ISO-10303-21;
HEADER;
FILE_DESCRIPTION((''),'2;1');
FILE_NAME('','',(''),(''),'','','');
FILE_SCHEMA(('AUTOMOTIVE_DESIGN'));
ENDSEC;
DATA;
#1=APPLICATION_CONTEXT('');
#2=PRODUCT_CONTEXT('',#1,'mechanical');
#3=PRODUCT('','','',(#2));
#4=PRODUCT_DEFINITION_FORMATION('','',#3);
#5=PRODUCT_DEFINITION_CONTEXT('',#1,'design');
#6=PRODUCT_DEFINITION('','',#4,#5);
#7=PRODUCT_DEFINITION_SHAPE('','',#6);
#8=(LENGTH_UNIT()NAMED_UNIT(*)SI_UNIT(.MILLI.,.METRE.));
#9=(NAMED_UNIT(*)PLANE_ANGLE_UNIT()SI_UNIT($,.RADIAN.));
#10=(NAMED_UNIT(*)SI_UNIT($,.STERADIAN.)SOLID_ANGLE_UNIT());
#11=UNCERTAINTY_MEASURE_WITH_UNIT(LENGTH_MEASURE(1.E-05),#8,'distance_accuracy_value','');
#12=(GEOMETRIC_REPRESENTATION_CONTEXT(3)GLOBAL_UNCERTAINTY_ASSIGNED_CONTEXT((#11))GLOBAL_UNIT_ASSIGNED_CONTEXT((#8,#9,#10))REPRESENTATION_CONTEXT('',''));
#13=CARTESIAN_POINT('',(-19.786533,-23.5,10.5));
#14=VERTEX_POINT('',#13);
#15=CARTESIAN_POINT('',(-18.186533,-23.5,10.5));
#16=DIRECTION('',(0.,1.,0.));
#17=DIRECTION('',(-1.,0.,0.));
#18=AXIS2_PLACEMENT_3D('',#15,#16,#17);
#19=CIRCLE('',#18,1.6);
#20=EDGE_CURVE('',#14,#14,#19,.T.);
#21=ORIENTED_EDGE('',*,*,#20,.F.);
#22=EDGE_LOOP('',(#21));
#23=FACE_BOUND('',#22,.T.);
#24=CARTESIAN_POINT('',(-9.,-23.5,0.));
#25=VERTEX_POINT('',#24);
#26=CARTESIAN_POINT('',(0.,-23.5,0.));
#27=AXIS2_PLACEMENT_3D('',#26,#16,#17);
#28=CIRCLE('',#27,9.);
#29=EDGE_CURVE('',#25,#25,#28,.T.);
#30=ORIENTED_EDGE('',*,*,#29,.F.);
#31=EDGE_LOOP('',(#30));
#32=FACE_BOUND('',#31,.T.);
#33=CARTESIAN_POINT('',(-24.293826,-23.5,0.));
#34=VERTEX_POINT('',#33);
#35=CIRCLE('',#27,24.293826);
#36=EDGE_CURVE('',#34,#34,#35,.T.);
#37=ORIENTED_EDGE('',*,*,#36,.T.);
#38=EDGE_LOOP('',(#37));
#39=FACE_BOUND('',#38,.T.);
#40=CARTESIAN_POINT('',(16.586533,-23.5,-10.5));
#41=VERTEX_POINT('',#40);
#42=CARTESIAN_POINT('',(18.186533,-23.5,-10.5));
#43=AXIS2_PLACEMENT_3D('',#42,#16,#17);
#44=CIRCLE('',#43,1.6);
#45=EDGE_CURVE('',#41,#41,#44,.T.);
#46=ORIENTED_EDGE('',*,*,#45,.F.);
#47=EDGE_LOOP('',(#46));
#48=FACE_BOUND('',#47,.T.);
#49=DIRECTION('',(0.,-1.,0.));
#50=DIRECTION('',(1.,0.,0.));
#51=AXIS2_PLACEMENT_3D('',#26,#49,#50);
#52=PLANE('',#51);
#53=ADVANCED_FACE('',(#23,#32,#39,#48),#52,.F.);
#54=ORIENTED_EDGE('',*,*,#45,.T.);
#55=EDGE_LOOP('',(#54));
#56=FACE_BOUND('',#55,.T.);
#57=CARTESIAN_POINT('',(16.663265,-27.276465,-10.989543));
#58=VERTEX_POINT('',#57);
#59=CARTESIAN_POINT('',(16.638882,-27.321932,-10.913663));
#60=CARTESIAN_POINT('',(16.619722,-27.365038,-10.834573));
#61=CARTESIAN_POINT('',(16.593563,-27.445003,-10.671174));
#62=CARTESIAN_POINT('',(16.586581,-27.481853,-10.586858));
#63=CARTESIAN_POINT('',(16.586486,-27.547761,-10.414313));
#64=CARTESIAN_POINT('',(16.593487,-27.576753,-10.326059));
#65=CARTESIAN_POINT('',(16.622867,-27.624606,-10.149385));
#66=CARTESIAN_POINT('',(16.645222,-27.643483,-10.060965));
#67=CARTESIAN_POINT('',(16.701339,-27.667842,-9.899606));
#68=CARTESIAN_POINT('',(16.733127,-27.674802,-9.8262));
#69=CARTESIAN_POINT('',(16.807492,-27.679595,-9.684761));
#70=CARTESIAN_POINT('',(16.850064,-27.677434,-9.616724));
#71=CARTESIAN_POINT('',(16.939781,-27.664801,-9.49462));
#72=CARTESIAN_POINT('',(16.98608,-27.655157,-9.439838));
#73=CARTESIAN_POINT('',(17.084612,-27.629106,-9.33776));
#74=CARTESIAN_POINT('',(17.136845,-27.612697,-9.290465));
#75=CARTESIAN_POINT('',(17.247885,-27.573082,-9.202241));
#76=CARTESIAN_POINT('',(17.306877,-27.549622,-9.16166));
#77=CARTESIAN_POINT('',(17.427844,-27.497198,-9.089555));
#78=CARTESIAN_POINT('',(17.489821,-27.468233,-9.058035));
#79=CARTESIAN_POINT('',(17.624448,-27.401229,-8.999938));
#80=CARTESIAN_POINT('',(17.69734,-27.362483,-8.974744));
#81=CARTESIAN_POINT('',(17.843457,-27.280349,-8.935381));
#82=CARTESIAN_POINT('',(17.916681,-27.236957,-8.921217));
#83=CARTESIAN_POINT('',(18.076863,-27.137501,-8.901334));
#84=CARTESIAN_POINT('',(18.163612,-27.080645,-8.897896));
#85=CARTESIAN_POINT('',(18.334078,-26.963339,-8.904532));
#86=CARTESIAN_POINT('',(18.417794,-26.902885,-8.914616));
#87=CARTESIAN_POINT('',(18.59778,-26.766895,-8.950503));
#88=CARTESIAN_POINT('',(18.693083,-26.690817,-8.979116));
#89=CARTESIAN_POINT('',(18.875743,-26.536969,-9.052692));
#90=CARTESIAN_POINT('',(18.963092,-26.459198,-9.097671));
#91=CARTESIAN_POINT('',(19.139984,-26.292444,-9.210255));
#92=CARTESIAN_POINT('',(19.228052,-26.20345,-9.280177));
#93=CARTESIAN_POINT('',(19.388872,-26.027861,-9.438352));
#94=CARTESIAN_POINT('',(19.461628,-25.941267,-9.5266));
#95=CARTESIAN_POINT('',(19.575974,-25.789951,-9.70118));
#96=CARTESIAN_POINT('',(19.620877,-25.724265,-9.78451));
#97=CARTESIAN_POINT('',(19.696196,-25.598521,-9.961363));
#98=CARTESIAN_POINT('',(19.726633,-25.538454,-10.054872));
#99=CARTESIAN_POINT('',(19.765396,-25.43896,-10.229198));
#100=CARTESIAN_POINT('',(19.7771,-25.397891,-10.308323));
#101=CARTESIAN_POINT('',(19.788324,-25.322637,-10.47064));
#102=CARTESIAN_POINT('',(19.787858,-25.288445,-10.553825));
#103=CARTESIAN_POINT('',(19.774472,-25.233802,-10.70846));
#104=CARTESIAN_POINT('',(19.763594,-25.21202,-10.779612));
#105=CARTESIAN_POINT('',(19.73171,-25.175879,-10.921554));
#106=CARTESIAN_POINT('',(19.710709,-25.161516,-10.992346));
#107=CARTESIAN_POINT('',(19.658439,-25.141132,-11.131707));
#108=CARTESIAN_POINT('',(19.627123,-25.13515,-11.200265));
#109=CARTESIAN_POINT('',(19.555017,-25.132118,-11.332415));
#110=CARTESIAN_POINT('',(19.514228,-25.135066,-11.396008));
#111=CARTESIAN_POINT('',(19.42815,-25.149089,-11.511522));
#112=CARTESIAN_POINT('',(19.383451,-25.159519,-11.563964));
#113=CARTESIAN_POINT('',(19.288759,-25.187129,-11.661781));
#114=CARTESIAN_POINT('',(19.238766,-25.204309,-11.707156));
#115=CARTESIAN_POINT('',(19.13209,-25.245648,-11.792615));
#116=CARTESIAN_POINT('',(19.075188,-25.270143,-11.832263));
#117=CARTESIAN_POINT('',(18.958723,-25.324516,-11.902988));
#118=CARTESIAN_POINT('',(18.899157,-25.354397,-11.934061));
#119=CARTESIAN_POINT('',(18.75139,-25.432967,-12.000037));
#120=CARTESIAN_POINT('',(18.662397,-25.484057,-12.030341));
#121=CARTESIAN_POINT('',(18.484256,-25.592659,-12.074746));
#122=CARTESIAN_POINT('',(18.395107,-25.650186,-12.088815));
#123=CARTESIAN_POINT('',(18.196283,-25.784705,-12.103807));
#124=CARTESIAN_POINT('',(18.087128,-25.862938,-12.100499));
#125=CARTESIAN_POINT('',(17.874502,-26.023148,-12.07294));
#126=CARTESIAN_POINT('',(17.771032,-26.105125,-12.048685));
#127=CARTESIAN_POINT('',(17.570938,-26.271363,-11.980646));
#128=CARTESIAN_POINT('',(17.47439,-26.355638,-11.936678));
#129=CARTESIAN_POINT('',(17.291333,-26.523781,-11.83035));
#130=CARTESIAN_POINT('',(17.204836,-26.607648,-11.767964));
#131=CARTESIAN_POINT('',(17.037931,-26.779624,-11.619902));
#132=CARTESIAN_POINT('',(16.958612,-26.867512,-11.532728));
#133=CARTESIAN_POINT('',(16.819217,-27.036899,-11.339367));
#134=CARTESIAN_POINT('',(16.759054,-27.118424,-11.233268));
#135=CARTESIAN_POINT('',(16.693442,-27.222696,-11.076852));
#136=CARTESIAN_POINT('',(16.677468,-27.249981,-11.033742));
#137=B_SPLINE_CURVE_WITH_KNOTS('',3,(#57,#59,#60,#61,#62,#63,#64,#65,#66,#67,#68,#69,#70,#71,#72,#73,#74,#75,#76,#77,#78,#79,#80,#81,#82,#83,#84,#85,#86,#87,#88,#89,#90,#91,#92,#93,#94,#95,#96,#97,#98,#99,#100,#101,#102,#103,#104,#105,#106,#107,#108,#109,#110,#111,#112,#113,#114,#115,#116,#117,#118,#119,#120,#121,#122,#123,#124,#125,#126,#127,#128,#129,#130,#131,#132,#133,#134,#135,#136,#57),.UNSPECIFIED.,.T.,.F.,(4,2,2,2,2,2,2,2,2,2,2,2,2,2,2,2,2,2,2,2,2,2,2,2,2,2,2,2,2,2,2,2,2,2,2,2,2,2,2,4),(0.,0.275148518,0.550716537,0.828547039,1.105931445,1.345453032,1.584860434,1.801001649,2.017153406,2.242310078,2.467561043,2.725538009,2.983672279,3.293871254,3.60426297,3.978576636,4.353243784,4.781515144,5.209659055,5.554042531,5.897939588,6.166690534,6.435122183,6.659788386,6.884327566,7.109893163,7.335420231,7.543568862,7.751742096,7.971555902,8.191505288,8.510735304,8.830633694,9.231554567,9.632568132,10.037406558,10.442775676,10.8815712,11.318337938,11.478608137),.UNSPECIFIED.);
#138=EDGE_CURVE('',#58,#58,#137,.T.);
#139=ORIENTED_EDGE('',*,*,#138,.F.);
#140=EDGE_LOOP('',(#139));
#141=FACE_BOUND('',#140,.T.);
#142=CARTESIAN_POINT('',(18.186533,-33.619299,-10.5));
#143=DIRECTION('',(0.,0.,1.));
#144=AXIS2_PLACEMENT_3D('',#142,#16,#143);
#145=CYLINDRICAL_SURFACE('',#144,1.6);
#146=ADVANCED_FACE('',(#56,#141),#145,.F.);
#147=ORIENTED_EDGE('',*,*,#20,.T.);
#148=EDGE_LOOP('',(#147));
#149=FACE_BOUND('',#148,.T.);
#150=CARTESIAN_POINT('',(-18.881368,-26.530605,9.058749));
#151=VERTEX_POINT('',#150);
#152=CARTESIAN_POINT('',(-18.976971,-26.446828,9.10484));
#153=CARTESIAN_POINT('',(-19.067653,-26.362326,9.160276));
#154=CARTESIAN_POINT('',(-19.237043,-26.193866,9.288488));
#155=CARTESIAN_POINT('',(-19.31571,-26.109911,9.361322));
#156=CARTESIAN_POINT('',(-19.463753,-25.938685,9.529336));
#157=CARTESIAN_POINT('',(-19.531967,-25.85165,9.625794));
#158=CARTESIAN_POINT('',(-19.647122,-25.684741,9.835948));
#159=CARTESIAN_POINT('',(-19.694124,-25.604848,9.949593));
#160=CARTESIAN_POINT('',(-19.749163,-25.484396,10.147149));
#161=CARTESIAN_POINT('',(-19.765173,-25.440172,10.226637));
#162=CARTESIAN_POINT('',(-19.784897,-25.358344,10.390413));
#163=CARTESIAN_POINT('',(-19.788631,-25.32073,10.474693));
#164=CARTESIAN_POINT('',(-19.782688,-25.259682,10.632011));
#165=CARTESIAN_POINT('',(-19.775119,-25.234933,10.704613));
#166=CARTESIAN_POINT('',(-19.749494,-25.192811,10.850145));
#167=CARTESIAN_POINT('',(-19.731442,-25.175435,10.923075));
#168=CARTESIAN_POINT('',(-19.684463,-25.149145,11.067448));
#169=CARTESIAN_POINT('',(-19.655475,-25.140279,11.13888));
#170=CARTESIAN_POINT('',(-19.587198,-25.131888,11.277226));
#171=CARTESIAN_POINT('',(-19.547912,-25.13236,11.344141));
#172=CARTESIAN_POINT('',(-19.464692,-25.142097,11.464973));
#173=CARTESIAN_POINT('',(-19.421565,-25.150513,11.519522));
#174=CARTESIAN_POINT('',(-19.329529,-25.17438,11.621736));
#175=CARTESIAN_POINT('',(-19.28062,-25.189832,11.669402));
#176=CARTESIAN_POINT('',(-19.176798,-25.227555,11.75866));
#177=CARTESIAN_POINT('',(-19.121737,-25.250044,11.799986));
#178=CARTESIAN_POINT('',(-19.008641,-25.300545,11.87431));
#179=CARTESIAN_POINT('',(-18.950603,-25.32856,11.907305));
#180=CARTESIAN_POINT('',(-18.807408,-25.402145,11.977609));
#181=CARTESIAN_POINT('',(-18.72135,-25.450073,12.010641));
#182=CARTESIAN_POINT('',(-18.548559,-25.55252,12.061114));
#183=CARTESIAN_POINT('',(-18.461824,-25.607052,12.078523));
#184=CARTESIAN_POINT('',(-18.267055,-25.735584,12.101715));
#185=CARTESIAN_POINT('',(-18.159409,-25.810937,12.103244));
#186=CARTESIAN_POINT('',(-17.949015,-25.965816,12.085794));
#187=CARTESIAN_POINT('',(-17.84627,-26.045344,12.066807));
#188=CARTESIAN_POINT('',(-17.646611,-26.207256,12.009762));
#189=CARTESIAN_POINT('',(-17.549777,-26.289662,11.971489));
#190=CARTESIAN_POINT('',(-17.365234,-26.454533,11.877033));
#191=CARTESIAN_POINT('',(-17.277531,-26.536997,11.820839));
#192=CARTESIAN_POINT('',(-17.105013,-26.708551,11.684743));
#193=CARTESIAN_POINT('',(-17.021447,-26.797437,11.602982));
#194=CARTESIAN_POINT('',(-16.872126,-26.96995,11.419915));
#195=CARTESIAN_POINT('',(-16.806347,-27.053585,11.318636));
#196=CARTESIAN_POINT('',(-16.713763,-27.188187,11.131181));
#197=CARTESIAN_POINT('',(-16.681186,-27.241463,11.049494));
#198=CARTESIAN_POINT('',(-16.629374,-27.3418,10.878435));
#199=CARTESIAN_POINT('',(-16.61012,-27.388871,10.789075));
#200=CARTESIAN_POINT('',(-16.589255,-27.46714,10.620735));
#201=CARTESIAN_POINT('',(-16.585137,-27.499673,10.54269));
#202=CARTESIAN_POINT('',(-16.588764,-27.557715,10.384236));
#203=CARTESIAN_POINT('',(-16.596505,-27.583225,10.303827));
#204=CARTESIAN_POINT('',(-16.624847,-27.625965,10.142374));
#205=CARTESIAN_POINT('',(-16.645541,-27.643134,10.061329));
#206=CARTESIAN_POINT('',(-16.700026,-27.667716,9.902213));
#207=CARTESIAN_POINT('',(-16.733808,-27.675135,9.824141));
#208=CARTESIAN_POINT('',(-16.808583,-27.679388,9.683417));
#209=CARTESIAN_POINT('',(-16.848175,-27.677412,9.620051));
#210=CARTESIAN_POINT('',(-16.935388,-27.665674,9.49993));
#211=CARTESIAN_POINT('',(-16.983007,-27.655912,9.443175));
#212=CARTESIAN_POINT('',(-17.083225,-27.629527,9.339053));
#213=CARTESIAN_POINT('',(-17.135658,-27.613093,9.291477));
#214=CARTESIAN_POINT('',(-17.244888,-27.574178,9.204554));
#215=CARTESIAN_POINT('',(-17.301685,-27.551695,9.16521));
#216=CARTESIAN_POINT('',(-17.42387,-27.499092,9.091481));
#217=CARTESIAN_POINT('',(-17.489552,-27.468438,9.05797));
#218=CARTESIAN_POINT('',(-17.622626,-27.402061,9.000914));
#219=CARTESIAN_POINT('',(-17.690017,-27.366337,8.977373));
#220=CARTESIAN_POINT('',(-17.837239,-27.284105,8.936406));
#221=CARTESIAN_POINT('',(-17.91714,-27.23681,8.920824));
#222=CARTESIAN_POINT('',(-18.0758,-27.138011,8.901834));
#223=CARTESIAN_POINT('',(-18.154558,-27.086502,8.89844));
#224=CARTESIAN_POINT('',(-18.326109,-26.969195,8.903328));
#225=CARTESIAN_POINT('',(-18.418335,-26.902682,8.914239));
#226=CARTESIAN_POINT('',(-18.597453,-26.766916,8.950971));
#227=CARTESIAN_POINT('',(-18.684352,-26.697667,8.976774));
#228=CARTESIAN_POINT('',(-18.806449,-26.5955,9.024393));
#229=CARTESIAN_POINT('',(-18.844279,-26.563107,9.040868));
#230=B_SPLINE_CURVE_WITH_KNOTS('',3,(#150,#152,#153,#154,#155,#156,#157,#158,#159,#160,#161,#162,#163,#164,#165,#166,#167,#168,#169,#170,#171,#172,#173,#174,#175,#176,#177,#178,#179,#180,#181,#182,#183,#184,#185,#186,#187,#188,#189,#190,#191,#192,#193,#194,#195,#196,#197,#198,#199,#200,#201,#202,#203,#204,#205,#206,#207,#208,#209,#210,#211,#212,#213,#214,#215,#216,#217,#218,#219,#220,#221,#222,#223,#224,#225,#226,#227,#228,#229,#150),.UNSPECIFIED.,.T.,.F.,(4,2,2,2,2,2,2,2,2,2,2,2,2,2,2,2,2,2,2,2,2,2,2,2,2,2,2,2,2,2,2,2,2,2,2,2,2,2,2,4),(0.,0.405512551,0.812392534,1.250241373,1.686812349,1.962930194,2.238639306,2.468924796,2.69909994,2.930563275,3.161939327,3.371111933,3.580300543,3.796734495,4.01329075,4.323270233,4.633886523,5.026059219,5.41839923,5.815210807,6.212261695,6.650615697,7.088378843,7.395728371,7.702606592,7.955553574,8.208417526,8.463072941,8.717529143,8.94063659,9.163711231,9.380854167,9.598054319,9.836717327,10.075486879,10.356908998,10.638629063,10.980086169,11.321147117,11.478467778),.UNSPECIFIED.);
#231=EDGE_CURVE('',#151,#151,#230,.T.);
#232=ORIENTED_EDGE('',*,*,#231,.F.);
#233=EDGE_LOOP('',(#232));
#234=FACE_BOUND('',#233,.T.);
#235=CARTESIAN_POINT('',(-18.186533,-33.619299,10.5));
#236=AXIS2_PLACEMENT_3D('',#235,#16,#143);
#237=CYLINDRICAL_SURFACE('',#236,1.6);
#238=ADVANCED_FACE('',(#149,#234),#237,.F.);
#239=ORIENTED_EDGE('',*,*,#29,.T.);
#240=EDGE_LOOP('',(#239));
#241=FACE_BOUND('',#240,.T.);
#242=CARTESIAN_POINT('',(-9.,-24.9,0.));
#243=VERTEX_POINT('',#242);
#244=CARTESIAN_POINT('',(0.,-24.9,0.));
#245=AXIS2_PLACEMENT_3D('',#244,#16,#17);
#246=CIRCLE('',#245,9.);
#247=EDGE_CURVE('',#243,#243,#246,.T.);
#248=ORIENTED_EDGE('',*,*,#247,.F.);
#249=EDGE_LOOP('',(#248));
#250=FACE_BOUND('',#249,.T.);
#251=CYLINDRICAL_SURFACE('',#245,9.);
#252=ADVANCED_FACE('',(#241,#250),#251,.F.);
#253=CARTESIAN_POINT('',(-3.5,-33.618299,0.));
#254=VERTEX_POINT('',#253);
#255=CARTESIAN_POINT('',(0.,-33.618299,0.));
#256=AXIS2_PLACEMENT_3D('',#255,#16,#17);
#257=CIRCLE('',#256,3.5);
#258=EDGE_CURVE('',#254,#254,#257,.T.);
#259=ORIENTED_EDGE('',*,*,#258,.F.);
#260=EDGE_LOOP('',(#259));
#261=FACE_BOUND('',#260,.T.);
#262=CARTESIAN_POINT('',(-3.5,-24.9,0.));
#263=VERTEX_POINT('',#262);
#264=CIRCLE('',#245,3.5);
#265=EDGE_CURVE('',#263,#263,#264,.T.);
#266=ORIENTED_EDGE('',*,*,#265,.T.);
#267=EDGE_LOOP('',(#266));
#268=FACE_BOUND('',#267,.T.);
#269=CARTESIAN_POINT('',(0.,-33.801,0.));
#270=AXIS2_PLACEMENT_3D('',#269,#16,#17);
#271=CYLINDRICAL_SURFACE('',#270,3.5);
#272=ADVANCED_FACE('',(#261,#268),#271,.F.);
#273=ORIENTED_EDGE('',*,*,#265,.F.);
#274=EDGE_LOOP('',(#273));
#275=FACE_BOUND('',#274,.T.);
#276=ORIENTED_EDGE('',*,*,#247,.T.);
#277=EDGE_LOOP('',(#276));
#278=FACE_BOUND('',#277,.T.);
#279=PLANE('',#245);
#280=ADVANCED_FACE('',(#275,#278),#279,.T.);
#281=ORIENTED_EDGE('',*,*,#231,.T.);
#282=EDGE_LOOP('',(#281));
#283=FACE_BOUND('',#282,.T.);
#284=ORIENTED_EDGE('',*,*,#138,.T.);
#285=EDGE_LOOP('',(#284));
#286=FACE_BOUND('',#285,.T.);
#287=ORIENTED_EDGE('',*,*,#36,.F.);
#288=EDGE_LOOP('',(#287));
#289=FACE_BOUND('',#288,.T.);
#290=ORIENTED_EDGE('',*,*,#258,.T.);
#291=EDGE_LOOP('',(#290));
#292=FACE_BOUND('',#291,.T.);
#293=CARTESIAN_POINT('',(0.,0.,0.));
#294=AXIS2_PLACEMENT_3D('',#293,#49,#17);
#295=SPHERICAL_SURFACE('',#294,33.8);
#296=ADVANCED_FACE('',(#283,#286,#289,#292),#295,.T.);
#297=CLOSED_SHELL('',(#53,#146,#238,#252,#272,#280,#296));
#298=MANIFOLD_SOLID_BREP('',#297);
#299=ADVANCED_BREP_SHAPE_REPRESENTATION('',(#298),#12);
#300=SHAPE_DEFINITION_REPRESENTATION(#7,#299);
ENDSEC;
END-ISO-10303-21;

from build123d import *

# Parameters (mm, degrees)
SKETCH2_R                = 33.8
CUT_EXTRUDE1_DEPTH       = 19.1
CUT_EXTRUDE2_START       = -33.8
CUT_EXTRUDE2_DEPTH       = 14.7
BOSS_EXTRUDE2_START      = -1.7
BOSS_EXTRUDE2_DEPTH      = 1.7
SKETCH19_R               = 9
CUT_EXTRUDE10_DEPTH      = 1.4
CUT_EXTRUDE11_REACH      = 42.429
CUT_EXTRUDE11_END_RADIUS = 33.8
SKETCH20_R               = 3.5
CUT_EXTRUDE7_REACH       = 44.024
CUT_EXTRUDE7_END_RADIUS  = 33.8
SKETCH10_R               = 1.6
CUT_EXTRUDE12_REACH      = 42.714
SKETCH21_R               = 27.886018002


# Read off the part's stored shape, not the designer's step: Revolve2
with BuildPart() as part:
    # Sketch1 → Revolve1 (revolve)
    with BuildSketch(Plane.XY, mode=Mode.PRIVATE) as revolve1_sk:
        with BuildLine():
            Line((0, -33.8), (0, 0))
            Line((0, 0), (33.8, 0))
            ThreePointArc((33.8, 0), (23.900209204, -23.900209204), (0, -33.8))
        make_face()
    revolve(revolve1_sk.sketch.rotate(Axis((0, -33.8, 0), (0, 1, 0)), 180), axis=Axis((0, -33.8, 0), (0, 1, 0)))

    # Sketch2 → Cut-Extrude1 (cut)
    with BuildSketch(Plane(origin=(0, 0, 0), x_dir=(1, 0, 0), z_dir=(0, 1, 0))):
        Circle(SKETCH2_R)
    extrude(amount=-CUT_EXTRUDE1_DEPTH, mode=Mode.SUBTRACT)

    # Sketch5 → Cut-Extrude2 (cut)
    with BuildSketch(Plane(origin=(0, 0, 0), x_dir=(1, 0, 0), z_dir=(0, 1, 0)).offset(CUT_EXTRUDE2_START)):
        with BuildLine():
            Line((-17.025732229, 6.571677263), (-23.544283672, 3.742739979))
            ThreePointArc((-23.544283672, 3.742739979), (-23.775794442, 3.633514413), (-24, 3.509985755))
            Line((-24, 3.509985755), (-24, -3.509985755))
            ThreePointArc((-24, -3.509985755), (-23.775794442, -3.633514413), (-23.544283672, -3.742739979))
            Line((-23.544283672, -3.742739979), (-17.025732229, -6.571677263))
            ThreePointArc((-17.025732229, -6.571677263), (0, -18.25), (17.025732229, -6.571677263))
            Line((17.025732229, -6.571677263), (23.544283672, -3.742739979))
            ThreePointArc((23.544283672, -3.742739979), (23.775794442, -3.633514413), (24, -3.509985755))
            Line((24, -3.509985755), (24, 3.509985755))
            ThreePointArc((24, 3.509985755), (23.775794442, 3.633514413), (23.544283672, 3.742739979))
            Line((23.544283672, 3.742739979), (17.025732229, 6.571677263))
            ThreePointArc((17.025732229, 6.571677263), (0, 18.25), (-17.025732229, 6.571677263))
        make_face()
    extrude(amount=CUT_EXTRUDE2_DEPTH, mode=Mode.SUBTRACT)

    # Sketch16 → Boss-Extrude2 (add)
    with BuildSketch(Plane(origin=(0, -19.1, 0), x_dir=(1, 0, 0), z_dir=(0, 1, 0)).offset(BOSS_EXTRUDE2_START)):
        with BuildLine():
            Line((17.025732229, 6.571677263), (23.544283672, 3.742739979))
            ThreePointArc((23.544283672, 3.742739979), (23.775794442, 3.633514413), (24, 3.509985755))
            Line((24, 3.509985755), (24, -3.509985755))
            ThreePointArc((24, -3.509985755), (23.775794442, -3.633514413), (23.544283672, -3.742739979))
            Line((23.544283672, -3.742739979), (17.025732229, -6.571677263))
            ThreePointArc((17.025732229, -6.571677263), (18.25, 0), (17.025732229, 6.571677263))
        make_face()
        with BuildLine():
            Line((-23.544283672, -3.742739979), (-17.025732229, -6.571677263))
            ThreePointArc((-17.025732229, -6.571677263), (-18.25, 0), (-17.025732229, 6.571677263))
            Line((-17.025732229, 6.571677263), (-23.544283672, 3.742739979))
            ThreePointArc((-23.544283672, 3.742739979), (-23.775794442, 3.633514413), (-24, 3.509985755))
            Line((-24, 3.509985755), (-24, -3.509985755))
            ThreePointArc((-24, -3.509985755), (-23.775794442, -3.633514413), (-23.544283672, -3.742739979))
        make_face()
    extrude(amount=BOSS_EXTRUDE2_DEPTH)

    # Revolve2 outline → Revolve2 (revolve)
    with BuildSketch(Plane.XY):
        with BuildLine():
            Line((0, -23.5), (0, -33.8))
            ThreePointArc((0, -33.8), (13.168073663, -31.129436808), (24.255308697, -23.53975361))
            Line((24.255308697, -23.53975361), (24.255308697, -23.5))
            Line((24.255308697, -23.5), (0, -23.5))
        make_face()
    revolve(axis=Axis((0, 0, 0), (0, 1, 0)))

    # Sketch19 → Cut-Extrude10 (cut)
    with BuildSketch(Plane(origin=(0, -23.5, 0), x_dir=(1, 0, 0), z_dir=(0, 1, 0))):
        with Locations(Location((0, 0, 0), (0, 0, 180))):
            Circle(SKETCH19_R)
    extrude(amount=-CUT_EXTRUDE10_DEPTH, mode=Mode.SUBTRACT)

    # Cut-Extrude11: up to this sphere (the profile starts inside it)
    cut_extrude11_end = Location((0, 0, 0)) * Sphere(CUT_EXTRUDE11_END_RADIUS, mode=Mode.PRIVATE)
    # Sketch20 → Cut-Extrude11 (cut, up to the surface)
    with BuildSketch(Plane(origin=(0, -24.9, 0), x_dir=(1, 0, 0), z_dir=(0, 1, 0)), mode=Mode.PRIVATE) as cut_extrude11_sk1:
        with Locations(Location((0, 0, 0), (0, 0, 180))):
            Circle(SKETCH20_R)
    cut_extrude11_tool1 = extrude(cut_extrude11_sk1.sketch, amount=-CUT_EXTRUDE11_REACH, mode=Mode.PRIVATE) & cut_extrude11_end
    add(cut_extrude11_tool1.solids().sort_by_distance((0, -24.9, 0))[0], mode=Mode.SUBTRACT)

    # Cut-Extrude7: up to this sphere (the profile starts inside it)
    cut_extrude7_end = Location((0, 0, 0)) * Sphere(CUT_EXTRUDE7_END_RADIUS, mode=Mode.PRIVATE)
    # Sketch10 → Cut-Extrude7 (cut, up to the surface)
    with BuildSketch(Plane(origin=(0, -19.1, 0), x_dir=(1, 0, 0), z_dir=(0, 1, 0)), mode=Mode.PRIVATE) as cut_extrude7_sk1:
        with Locations(Location((-18.186533479, -10.5, 0), (0, 0, 270))):
            Circle(SKETCH10_R)
    cut_extrude7_tool1 = extrude(cut_extrude7_sk1.sketch, amount=-CUT_EXTRUDE7_REACH, mode=Mode.PRIVATE) & cut_extrude7_end
    add(cut_extrude7_tool1.solids().sort_by_distance((-18.186533, -19.1, 10.5))[0], mode=Mode.SUBTRACT)
    # Sketch10 → Cut-Extrude7 (cut, up to the surface)
    with BuildSketch(Plane(origin=(0, -19.1, 0), x_dir=(1, 0, 0), z_dir=(0, 1, 0)), mode=Mode.PRIVATE) as cut_extrude7_sk2:
        with Locations(Location((18.186533479, 10.5, 0), (0, 0, 270))):
            Circle(SKETCH10_R)
    cut_extrude7_tool2 = extrude(cut_extrude7_sk2.sketch, amount=-CUT_EXTRUDE7_REACH, mode=Mode.PRIVATE) & cut_extrude7_end
    add(cut_extrude7_tool2.solids().sort_by_distance((18.186533, -19.1, -10.5))[0], mode=Mode.SUBTRACT)

    # Sketch21 → Cut-Extrude12 (cut, up to next)
    with BuildSketch(Plane(origin=(0, -23.5, 0), x_dir=(1, 0, 0), z_dir=(0, 1, 0)), mode=Mode.PRIVATE) as cut_extrude12_sk1:
        Circle(SKETCH21_R)
    cut_extrude12_tool1 = extrude(cut_extrude12_sk1.sketch, amount=CUT_EXTRUDE12_REACH, mode=Mode.PRIVATE) & part.part
    add(cut_extrude12_tool1.solids().sort_by_distance((0, -23.5, 0))[0], mode=Mode.SUBTRACT)


solid = part.part
